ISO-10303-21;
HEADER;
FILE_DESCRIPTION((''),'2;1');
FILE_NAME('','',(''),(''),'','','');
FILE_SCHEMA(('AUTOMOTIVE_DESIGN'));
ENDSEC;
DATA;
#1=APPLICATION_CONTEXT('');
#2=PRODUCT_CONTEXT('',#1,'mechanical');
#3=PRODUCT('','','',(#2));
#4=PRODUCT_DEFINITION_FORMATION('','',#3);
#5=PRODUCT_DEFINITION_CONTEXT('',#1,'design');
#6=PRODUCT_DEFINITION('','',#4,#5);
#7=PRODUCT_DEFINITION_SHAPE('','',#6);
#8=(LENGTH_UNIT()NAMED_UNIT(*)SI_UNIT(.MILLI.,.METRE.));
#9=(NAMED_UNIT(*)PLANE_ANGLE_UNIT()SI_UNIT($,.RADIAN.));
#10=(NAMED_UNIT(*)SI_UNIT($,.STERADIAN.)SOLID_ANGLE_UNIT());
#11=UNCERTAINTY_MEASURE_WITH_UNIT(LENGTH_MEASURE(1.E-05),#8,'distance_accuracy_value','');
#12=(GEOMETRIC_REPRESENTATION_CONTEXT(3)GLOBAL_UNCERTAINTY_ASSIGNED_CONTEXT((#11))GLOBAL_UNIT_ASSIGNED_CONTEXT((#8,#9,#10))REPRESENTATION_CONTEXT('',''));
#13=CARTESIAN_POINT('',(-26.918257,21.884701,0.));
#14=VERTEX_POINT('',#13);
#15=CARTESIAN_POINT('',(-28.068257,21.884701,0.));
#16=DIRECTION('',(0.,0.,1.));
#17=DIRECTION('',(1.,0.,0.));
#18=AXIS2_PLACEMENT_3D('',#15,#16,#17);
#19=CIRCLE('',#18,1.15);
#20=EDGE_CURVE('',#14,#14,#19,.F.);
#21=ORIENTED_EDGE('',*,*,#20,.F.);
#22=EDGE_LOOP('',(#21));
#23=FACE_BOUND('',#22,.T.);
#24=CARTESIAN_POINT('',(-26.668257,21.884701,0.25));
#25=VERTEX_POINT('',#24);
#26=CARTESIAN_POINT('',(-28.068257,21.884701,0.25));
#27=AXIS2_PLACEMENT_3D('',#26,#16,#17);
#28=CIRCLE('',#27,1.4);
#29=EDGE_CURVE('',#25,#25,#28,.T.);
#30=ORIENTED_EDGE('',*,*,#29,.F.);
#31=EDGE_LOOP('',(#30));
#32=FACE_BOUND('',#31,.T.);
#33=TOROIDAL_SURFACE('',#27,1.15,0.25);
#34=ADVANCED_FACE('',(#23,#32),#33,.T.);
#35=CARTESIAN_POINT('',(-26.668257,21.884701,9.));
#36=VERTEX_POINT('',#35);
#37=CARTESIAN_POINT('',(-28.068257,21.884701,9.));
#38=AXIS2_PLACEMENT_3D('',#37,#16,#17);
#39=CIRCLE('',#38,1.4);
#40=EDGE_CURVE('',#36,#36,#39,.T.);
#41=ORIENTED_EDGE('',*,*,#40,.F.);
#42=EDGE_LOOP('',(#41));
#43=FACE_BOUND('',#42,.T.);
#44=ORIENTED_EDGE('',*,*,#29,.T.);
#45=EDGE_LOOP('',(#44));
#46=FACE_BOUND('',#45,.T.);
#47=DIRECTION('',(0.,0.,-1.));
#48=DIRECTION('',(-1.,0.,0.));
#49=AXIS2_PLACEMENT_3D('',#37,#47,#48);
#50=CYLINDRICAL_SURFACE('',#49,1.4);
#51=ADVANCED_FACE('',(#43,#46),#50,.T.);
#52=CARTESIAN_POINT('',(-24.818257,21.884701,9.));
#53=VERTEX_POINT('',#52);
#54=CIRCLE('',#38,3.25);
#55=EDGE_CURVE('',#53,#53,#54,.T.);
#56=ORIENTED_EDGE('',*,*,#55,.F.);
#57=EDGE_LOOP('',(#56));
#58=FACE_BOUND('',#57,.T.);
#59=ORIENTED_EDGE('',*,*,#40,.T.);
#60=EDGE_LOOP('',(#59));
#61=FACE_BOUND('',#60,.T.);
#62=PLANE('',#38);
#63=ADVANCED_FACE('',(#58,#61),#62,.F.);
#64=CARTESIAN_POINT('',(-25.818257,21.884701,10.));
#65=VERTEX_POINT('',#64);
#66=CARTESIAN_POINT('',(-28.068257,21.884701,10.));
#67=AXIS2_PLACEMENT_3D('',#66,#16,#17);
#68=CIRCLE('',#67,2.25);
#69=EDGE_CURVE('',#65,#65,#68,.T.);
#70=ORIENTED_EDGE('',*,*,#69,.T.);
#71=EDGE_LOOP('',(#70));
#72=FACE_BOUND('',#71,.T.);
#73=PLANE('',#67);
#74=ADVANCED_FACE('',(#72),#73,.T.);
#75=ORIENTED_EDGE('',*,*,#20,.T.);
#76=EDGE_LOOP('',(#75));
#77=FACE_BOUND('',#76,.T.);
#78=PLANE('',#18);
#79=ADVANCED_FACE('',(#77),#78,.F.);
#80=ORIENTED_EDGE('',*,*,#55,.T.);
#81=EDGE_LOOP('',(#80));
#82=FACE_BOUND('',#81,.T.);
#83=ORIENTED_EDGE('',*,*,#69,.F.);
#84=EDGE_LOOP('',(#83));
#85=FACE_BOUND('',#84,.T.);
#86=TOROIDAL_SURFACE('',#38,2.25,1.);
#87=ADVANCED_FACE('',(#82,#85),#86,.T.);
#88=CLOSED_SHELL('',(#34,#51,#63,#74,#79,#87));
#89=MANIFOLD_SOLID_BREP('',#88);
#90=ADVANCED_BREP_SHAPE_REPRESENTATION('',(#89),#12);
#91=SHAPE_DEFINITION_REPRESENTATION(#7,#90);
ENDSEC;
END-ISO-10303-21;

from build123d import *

# Parameters (mm, degrees)
ESQUISSE1_R        = 1.4
BOSS_EXTRU_1_DEPTH = 9
ESQUISSE2_R        = 3.25
BOSS_EXTRU_2_DEPTH = 1
CONG_1_R           = 1
CONG_2_R           = 0.25


with BuildPart() as part:
    # Esquisse1 → Boss.-Extru.1 (new body)
    with BuildSketch(Plane.XY):
        with Locations((-28.068256791, 21.884700983)):
            Circle(ESQUISSE1_R)
    extrude(amount=BOSS_EXTRU_1_DEPTH)

    # Esquisse2 → Boss.-Extru.2 (add)
    with BuildSketch(Plane.XY.offset(9)):
        with Locations((-28.068256791, 21.884700983)):
            Circle(ESQUISSE2_R)
    extrude(amount=BOSS_EXTRU_2_DEPTH)

    # Congé1
    cong_1_edges = [part.edges().sort_by_distance(p)[0] for p in [
        (-31.318256791, 21.884700983, 10),
    ]]
    fillet(cong_1_edges, radius=CONG_1_R - 0.0001)  # a hair under: the kernel refuses the full size

    # Congé2
    cong_2_edges = [part.edges().sort_by_distance(p)[0] for p in [
        (-29.468256791, 21.884700983, 0),
    ]]
    fillet(cong_2_edges, radius=CONG_2_R)


solid = part.part
